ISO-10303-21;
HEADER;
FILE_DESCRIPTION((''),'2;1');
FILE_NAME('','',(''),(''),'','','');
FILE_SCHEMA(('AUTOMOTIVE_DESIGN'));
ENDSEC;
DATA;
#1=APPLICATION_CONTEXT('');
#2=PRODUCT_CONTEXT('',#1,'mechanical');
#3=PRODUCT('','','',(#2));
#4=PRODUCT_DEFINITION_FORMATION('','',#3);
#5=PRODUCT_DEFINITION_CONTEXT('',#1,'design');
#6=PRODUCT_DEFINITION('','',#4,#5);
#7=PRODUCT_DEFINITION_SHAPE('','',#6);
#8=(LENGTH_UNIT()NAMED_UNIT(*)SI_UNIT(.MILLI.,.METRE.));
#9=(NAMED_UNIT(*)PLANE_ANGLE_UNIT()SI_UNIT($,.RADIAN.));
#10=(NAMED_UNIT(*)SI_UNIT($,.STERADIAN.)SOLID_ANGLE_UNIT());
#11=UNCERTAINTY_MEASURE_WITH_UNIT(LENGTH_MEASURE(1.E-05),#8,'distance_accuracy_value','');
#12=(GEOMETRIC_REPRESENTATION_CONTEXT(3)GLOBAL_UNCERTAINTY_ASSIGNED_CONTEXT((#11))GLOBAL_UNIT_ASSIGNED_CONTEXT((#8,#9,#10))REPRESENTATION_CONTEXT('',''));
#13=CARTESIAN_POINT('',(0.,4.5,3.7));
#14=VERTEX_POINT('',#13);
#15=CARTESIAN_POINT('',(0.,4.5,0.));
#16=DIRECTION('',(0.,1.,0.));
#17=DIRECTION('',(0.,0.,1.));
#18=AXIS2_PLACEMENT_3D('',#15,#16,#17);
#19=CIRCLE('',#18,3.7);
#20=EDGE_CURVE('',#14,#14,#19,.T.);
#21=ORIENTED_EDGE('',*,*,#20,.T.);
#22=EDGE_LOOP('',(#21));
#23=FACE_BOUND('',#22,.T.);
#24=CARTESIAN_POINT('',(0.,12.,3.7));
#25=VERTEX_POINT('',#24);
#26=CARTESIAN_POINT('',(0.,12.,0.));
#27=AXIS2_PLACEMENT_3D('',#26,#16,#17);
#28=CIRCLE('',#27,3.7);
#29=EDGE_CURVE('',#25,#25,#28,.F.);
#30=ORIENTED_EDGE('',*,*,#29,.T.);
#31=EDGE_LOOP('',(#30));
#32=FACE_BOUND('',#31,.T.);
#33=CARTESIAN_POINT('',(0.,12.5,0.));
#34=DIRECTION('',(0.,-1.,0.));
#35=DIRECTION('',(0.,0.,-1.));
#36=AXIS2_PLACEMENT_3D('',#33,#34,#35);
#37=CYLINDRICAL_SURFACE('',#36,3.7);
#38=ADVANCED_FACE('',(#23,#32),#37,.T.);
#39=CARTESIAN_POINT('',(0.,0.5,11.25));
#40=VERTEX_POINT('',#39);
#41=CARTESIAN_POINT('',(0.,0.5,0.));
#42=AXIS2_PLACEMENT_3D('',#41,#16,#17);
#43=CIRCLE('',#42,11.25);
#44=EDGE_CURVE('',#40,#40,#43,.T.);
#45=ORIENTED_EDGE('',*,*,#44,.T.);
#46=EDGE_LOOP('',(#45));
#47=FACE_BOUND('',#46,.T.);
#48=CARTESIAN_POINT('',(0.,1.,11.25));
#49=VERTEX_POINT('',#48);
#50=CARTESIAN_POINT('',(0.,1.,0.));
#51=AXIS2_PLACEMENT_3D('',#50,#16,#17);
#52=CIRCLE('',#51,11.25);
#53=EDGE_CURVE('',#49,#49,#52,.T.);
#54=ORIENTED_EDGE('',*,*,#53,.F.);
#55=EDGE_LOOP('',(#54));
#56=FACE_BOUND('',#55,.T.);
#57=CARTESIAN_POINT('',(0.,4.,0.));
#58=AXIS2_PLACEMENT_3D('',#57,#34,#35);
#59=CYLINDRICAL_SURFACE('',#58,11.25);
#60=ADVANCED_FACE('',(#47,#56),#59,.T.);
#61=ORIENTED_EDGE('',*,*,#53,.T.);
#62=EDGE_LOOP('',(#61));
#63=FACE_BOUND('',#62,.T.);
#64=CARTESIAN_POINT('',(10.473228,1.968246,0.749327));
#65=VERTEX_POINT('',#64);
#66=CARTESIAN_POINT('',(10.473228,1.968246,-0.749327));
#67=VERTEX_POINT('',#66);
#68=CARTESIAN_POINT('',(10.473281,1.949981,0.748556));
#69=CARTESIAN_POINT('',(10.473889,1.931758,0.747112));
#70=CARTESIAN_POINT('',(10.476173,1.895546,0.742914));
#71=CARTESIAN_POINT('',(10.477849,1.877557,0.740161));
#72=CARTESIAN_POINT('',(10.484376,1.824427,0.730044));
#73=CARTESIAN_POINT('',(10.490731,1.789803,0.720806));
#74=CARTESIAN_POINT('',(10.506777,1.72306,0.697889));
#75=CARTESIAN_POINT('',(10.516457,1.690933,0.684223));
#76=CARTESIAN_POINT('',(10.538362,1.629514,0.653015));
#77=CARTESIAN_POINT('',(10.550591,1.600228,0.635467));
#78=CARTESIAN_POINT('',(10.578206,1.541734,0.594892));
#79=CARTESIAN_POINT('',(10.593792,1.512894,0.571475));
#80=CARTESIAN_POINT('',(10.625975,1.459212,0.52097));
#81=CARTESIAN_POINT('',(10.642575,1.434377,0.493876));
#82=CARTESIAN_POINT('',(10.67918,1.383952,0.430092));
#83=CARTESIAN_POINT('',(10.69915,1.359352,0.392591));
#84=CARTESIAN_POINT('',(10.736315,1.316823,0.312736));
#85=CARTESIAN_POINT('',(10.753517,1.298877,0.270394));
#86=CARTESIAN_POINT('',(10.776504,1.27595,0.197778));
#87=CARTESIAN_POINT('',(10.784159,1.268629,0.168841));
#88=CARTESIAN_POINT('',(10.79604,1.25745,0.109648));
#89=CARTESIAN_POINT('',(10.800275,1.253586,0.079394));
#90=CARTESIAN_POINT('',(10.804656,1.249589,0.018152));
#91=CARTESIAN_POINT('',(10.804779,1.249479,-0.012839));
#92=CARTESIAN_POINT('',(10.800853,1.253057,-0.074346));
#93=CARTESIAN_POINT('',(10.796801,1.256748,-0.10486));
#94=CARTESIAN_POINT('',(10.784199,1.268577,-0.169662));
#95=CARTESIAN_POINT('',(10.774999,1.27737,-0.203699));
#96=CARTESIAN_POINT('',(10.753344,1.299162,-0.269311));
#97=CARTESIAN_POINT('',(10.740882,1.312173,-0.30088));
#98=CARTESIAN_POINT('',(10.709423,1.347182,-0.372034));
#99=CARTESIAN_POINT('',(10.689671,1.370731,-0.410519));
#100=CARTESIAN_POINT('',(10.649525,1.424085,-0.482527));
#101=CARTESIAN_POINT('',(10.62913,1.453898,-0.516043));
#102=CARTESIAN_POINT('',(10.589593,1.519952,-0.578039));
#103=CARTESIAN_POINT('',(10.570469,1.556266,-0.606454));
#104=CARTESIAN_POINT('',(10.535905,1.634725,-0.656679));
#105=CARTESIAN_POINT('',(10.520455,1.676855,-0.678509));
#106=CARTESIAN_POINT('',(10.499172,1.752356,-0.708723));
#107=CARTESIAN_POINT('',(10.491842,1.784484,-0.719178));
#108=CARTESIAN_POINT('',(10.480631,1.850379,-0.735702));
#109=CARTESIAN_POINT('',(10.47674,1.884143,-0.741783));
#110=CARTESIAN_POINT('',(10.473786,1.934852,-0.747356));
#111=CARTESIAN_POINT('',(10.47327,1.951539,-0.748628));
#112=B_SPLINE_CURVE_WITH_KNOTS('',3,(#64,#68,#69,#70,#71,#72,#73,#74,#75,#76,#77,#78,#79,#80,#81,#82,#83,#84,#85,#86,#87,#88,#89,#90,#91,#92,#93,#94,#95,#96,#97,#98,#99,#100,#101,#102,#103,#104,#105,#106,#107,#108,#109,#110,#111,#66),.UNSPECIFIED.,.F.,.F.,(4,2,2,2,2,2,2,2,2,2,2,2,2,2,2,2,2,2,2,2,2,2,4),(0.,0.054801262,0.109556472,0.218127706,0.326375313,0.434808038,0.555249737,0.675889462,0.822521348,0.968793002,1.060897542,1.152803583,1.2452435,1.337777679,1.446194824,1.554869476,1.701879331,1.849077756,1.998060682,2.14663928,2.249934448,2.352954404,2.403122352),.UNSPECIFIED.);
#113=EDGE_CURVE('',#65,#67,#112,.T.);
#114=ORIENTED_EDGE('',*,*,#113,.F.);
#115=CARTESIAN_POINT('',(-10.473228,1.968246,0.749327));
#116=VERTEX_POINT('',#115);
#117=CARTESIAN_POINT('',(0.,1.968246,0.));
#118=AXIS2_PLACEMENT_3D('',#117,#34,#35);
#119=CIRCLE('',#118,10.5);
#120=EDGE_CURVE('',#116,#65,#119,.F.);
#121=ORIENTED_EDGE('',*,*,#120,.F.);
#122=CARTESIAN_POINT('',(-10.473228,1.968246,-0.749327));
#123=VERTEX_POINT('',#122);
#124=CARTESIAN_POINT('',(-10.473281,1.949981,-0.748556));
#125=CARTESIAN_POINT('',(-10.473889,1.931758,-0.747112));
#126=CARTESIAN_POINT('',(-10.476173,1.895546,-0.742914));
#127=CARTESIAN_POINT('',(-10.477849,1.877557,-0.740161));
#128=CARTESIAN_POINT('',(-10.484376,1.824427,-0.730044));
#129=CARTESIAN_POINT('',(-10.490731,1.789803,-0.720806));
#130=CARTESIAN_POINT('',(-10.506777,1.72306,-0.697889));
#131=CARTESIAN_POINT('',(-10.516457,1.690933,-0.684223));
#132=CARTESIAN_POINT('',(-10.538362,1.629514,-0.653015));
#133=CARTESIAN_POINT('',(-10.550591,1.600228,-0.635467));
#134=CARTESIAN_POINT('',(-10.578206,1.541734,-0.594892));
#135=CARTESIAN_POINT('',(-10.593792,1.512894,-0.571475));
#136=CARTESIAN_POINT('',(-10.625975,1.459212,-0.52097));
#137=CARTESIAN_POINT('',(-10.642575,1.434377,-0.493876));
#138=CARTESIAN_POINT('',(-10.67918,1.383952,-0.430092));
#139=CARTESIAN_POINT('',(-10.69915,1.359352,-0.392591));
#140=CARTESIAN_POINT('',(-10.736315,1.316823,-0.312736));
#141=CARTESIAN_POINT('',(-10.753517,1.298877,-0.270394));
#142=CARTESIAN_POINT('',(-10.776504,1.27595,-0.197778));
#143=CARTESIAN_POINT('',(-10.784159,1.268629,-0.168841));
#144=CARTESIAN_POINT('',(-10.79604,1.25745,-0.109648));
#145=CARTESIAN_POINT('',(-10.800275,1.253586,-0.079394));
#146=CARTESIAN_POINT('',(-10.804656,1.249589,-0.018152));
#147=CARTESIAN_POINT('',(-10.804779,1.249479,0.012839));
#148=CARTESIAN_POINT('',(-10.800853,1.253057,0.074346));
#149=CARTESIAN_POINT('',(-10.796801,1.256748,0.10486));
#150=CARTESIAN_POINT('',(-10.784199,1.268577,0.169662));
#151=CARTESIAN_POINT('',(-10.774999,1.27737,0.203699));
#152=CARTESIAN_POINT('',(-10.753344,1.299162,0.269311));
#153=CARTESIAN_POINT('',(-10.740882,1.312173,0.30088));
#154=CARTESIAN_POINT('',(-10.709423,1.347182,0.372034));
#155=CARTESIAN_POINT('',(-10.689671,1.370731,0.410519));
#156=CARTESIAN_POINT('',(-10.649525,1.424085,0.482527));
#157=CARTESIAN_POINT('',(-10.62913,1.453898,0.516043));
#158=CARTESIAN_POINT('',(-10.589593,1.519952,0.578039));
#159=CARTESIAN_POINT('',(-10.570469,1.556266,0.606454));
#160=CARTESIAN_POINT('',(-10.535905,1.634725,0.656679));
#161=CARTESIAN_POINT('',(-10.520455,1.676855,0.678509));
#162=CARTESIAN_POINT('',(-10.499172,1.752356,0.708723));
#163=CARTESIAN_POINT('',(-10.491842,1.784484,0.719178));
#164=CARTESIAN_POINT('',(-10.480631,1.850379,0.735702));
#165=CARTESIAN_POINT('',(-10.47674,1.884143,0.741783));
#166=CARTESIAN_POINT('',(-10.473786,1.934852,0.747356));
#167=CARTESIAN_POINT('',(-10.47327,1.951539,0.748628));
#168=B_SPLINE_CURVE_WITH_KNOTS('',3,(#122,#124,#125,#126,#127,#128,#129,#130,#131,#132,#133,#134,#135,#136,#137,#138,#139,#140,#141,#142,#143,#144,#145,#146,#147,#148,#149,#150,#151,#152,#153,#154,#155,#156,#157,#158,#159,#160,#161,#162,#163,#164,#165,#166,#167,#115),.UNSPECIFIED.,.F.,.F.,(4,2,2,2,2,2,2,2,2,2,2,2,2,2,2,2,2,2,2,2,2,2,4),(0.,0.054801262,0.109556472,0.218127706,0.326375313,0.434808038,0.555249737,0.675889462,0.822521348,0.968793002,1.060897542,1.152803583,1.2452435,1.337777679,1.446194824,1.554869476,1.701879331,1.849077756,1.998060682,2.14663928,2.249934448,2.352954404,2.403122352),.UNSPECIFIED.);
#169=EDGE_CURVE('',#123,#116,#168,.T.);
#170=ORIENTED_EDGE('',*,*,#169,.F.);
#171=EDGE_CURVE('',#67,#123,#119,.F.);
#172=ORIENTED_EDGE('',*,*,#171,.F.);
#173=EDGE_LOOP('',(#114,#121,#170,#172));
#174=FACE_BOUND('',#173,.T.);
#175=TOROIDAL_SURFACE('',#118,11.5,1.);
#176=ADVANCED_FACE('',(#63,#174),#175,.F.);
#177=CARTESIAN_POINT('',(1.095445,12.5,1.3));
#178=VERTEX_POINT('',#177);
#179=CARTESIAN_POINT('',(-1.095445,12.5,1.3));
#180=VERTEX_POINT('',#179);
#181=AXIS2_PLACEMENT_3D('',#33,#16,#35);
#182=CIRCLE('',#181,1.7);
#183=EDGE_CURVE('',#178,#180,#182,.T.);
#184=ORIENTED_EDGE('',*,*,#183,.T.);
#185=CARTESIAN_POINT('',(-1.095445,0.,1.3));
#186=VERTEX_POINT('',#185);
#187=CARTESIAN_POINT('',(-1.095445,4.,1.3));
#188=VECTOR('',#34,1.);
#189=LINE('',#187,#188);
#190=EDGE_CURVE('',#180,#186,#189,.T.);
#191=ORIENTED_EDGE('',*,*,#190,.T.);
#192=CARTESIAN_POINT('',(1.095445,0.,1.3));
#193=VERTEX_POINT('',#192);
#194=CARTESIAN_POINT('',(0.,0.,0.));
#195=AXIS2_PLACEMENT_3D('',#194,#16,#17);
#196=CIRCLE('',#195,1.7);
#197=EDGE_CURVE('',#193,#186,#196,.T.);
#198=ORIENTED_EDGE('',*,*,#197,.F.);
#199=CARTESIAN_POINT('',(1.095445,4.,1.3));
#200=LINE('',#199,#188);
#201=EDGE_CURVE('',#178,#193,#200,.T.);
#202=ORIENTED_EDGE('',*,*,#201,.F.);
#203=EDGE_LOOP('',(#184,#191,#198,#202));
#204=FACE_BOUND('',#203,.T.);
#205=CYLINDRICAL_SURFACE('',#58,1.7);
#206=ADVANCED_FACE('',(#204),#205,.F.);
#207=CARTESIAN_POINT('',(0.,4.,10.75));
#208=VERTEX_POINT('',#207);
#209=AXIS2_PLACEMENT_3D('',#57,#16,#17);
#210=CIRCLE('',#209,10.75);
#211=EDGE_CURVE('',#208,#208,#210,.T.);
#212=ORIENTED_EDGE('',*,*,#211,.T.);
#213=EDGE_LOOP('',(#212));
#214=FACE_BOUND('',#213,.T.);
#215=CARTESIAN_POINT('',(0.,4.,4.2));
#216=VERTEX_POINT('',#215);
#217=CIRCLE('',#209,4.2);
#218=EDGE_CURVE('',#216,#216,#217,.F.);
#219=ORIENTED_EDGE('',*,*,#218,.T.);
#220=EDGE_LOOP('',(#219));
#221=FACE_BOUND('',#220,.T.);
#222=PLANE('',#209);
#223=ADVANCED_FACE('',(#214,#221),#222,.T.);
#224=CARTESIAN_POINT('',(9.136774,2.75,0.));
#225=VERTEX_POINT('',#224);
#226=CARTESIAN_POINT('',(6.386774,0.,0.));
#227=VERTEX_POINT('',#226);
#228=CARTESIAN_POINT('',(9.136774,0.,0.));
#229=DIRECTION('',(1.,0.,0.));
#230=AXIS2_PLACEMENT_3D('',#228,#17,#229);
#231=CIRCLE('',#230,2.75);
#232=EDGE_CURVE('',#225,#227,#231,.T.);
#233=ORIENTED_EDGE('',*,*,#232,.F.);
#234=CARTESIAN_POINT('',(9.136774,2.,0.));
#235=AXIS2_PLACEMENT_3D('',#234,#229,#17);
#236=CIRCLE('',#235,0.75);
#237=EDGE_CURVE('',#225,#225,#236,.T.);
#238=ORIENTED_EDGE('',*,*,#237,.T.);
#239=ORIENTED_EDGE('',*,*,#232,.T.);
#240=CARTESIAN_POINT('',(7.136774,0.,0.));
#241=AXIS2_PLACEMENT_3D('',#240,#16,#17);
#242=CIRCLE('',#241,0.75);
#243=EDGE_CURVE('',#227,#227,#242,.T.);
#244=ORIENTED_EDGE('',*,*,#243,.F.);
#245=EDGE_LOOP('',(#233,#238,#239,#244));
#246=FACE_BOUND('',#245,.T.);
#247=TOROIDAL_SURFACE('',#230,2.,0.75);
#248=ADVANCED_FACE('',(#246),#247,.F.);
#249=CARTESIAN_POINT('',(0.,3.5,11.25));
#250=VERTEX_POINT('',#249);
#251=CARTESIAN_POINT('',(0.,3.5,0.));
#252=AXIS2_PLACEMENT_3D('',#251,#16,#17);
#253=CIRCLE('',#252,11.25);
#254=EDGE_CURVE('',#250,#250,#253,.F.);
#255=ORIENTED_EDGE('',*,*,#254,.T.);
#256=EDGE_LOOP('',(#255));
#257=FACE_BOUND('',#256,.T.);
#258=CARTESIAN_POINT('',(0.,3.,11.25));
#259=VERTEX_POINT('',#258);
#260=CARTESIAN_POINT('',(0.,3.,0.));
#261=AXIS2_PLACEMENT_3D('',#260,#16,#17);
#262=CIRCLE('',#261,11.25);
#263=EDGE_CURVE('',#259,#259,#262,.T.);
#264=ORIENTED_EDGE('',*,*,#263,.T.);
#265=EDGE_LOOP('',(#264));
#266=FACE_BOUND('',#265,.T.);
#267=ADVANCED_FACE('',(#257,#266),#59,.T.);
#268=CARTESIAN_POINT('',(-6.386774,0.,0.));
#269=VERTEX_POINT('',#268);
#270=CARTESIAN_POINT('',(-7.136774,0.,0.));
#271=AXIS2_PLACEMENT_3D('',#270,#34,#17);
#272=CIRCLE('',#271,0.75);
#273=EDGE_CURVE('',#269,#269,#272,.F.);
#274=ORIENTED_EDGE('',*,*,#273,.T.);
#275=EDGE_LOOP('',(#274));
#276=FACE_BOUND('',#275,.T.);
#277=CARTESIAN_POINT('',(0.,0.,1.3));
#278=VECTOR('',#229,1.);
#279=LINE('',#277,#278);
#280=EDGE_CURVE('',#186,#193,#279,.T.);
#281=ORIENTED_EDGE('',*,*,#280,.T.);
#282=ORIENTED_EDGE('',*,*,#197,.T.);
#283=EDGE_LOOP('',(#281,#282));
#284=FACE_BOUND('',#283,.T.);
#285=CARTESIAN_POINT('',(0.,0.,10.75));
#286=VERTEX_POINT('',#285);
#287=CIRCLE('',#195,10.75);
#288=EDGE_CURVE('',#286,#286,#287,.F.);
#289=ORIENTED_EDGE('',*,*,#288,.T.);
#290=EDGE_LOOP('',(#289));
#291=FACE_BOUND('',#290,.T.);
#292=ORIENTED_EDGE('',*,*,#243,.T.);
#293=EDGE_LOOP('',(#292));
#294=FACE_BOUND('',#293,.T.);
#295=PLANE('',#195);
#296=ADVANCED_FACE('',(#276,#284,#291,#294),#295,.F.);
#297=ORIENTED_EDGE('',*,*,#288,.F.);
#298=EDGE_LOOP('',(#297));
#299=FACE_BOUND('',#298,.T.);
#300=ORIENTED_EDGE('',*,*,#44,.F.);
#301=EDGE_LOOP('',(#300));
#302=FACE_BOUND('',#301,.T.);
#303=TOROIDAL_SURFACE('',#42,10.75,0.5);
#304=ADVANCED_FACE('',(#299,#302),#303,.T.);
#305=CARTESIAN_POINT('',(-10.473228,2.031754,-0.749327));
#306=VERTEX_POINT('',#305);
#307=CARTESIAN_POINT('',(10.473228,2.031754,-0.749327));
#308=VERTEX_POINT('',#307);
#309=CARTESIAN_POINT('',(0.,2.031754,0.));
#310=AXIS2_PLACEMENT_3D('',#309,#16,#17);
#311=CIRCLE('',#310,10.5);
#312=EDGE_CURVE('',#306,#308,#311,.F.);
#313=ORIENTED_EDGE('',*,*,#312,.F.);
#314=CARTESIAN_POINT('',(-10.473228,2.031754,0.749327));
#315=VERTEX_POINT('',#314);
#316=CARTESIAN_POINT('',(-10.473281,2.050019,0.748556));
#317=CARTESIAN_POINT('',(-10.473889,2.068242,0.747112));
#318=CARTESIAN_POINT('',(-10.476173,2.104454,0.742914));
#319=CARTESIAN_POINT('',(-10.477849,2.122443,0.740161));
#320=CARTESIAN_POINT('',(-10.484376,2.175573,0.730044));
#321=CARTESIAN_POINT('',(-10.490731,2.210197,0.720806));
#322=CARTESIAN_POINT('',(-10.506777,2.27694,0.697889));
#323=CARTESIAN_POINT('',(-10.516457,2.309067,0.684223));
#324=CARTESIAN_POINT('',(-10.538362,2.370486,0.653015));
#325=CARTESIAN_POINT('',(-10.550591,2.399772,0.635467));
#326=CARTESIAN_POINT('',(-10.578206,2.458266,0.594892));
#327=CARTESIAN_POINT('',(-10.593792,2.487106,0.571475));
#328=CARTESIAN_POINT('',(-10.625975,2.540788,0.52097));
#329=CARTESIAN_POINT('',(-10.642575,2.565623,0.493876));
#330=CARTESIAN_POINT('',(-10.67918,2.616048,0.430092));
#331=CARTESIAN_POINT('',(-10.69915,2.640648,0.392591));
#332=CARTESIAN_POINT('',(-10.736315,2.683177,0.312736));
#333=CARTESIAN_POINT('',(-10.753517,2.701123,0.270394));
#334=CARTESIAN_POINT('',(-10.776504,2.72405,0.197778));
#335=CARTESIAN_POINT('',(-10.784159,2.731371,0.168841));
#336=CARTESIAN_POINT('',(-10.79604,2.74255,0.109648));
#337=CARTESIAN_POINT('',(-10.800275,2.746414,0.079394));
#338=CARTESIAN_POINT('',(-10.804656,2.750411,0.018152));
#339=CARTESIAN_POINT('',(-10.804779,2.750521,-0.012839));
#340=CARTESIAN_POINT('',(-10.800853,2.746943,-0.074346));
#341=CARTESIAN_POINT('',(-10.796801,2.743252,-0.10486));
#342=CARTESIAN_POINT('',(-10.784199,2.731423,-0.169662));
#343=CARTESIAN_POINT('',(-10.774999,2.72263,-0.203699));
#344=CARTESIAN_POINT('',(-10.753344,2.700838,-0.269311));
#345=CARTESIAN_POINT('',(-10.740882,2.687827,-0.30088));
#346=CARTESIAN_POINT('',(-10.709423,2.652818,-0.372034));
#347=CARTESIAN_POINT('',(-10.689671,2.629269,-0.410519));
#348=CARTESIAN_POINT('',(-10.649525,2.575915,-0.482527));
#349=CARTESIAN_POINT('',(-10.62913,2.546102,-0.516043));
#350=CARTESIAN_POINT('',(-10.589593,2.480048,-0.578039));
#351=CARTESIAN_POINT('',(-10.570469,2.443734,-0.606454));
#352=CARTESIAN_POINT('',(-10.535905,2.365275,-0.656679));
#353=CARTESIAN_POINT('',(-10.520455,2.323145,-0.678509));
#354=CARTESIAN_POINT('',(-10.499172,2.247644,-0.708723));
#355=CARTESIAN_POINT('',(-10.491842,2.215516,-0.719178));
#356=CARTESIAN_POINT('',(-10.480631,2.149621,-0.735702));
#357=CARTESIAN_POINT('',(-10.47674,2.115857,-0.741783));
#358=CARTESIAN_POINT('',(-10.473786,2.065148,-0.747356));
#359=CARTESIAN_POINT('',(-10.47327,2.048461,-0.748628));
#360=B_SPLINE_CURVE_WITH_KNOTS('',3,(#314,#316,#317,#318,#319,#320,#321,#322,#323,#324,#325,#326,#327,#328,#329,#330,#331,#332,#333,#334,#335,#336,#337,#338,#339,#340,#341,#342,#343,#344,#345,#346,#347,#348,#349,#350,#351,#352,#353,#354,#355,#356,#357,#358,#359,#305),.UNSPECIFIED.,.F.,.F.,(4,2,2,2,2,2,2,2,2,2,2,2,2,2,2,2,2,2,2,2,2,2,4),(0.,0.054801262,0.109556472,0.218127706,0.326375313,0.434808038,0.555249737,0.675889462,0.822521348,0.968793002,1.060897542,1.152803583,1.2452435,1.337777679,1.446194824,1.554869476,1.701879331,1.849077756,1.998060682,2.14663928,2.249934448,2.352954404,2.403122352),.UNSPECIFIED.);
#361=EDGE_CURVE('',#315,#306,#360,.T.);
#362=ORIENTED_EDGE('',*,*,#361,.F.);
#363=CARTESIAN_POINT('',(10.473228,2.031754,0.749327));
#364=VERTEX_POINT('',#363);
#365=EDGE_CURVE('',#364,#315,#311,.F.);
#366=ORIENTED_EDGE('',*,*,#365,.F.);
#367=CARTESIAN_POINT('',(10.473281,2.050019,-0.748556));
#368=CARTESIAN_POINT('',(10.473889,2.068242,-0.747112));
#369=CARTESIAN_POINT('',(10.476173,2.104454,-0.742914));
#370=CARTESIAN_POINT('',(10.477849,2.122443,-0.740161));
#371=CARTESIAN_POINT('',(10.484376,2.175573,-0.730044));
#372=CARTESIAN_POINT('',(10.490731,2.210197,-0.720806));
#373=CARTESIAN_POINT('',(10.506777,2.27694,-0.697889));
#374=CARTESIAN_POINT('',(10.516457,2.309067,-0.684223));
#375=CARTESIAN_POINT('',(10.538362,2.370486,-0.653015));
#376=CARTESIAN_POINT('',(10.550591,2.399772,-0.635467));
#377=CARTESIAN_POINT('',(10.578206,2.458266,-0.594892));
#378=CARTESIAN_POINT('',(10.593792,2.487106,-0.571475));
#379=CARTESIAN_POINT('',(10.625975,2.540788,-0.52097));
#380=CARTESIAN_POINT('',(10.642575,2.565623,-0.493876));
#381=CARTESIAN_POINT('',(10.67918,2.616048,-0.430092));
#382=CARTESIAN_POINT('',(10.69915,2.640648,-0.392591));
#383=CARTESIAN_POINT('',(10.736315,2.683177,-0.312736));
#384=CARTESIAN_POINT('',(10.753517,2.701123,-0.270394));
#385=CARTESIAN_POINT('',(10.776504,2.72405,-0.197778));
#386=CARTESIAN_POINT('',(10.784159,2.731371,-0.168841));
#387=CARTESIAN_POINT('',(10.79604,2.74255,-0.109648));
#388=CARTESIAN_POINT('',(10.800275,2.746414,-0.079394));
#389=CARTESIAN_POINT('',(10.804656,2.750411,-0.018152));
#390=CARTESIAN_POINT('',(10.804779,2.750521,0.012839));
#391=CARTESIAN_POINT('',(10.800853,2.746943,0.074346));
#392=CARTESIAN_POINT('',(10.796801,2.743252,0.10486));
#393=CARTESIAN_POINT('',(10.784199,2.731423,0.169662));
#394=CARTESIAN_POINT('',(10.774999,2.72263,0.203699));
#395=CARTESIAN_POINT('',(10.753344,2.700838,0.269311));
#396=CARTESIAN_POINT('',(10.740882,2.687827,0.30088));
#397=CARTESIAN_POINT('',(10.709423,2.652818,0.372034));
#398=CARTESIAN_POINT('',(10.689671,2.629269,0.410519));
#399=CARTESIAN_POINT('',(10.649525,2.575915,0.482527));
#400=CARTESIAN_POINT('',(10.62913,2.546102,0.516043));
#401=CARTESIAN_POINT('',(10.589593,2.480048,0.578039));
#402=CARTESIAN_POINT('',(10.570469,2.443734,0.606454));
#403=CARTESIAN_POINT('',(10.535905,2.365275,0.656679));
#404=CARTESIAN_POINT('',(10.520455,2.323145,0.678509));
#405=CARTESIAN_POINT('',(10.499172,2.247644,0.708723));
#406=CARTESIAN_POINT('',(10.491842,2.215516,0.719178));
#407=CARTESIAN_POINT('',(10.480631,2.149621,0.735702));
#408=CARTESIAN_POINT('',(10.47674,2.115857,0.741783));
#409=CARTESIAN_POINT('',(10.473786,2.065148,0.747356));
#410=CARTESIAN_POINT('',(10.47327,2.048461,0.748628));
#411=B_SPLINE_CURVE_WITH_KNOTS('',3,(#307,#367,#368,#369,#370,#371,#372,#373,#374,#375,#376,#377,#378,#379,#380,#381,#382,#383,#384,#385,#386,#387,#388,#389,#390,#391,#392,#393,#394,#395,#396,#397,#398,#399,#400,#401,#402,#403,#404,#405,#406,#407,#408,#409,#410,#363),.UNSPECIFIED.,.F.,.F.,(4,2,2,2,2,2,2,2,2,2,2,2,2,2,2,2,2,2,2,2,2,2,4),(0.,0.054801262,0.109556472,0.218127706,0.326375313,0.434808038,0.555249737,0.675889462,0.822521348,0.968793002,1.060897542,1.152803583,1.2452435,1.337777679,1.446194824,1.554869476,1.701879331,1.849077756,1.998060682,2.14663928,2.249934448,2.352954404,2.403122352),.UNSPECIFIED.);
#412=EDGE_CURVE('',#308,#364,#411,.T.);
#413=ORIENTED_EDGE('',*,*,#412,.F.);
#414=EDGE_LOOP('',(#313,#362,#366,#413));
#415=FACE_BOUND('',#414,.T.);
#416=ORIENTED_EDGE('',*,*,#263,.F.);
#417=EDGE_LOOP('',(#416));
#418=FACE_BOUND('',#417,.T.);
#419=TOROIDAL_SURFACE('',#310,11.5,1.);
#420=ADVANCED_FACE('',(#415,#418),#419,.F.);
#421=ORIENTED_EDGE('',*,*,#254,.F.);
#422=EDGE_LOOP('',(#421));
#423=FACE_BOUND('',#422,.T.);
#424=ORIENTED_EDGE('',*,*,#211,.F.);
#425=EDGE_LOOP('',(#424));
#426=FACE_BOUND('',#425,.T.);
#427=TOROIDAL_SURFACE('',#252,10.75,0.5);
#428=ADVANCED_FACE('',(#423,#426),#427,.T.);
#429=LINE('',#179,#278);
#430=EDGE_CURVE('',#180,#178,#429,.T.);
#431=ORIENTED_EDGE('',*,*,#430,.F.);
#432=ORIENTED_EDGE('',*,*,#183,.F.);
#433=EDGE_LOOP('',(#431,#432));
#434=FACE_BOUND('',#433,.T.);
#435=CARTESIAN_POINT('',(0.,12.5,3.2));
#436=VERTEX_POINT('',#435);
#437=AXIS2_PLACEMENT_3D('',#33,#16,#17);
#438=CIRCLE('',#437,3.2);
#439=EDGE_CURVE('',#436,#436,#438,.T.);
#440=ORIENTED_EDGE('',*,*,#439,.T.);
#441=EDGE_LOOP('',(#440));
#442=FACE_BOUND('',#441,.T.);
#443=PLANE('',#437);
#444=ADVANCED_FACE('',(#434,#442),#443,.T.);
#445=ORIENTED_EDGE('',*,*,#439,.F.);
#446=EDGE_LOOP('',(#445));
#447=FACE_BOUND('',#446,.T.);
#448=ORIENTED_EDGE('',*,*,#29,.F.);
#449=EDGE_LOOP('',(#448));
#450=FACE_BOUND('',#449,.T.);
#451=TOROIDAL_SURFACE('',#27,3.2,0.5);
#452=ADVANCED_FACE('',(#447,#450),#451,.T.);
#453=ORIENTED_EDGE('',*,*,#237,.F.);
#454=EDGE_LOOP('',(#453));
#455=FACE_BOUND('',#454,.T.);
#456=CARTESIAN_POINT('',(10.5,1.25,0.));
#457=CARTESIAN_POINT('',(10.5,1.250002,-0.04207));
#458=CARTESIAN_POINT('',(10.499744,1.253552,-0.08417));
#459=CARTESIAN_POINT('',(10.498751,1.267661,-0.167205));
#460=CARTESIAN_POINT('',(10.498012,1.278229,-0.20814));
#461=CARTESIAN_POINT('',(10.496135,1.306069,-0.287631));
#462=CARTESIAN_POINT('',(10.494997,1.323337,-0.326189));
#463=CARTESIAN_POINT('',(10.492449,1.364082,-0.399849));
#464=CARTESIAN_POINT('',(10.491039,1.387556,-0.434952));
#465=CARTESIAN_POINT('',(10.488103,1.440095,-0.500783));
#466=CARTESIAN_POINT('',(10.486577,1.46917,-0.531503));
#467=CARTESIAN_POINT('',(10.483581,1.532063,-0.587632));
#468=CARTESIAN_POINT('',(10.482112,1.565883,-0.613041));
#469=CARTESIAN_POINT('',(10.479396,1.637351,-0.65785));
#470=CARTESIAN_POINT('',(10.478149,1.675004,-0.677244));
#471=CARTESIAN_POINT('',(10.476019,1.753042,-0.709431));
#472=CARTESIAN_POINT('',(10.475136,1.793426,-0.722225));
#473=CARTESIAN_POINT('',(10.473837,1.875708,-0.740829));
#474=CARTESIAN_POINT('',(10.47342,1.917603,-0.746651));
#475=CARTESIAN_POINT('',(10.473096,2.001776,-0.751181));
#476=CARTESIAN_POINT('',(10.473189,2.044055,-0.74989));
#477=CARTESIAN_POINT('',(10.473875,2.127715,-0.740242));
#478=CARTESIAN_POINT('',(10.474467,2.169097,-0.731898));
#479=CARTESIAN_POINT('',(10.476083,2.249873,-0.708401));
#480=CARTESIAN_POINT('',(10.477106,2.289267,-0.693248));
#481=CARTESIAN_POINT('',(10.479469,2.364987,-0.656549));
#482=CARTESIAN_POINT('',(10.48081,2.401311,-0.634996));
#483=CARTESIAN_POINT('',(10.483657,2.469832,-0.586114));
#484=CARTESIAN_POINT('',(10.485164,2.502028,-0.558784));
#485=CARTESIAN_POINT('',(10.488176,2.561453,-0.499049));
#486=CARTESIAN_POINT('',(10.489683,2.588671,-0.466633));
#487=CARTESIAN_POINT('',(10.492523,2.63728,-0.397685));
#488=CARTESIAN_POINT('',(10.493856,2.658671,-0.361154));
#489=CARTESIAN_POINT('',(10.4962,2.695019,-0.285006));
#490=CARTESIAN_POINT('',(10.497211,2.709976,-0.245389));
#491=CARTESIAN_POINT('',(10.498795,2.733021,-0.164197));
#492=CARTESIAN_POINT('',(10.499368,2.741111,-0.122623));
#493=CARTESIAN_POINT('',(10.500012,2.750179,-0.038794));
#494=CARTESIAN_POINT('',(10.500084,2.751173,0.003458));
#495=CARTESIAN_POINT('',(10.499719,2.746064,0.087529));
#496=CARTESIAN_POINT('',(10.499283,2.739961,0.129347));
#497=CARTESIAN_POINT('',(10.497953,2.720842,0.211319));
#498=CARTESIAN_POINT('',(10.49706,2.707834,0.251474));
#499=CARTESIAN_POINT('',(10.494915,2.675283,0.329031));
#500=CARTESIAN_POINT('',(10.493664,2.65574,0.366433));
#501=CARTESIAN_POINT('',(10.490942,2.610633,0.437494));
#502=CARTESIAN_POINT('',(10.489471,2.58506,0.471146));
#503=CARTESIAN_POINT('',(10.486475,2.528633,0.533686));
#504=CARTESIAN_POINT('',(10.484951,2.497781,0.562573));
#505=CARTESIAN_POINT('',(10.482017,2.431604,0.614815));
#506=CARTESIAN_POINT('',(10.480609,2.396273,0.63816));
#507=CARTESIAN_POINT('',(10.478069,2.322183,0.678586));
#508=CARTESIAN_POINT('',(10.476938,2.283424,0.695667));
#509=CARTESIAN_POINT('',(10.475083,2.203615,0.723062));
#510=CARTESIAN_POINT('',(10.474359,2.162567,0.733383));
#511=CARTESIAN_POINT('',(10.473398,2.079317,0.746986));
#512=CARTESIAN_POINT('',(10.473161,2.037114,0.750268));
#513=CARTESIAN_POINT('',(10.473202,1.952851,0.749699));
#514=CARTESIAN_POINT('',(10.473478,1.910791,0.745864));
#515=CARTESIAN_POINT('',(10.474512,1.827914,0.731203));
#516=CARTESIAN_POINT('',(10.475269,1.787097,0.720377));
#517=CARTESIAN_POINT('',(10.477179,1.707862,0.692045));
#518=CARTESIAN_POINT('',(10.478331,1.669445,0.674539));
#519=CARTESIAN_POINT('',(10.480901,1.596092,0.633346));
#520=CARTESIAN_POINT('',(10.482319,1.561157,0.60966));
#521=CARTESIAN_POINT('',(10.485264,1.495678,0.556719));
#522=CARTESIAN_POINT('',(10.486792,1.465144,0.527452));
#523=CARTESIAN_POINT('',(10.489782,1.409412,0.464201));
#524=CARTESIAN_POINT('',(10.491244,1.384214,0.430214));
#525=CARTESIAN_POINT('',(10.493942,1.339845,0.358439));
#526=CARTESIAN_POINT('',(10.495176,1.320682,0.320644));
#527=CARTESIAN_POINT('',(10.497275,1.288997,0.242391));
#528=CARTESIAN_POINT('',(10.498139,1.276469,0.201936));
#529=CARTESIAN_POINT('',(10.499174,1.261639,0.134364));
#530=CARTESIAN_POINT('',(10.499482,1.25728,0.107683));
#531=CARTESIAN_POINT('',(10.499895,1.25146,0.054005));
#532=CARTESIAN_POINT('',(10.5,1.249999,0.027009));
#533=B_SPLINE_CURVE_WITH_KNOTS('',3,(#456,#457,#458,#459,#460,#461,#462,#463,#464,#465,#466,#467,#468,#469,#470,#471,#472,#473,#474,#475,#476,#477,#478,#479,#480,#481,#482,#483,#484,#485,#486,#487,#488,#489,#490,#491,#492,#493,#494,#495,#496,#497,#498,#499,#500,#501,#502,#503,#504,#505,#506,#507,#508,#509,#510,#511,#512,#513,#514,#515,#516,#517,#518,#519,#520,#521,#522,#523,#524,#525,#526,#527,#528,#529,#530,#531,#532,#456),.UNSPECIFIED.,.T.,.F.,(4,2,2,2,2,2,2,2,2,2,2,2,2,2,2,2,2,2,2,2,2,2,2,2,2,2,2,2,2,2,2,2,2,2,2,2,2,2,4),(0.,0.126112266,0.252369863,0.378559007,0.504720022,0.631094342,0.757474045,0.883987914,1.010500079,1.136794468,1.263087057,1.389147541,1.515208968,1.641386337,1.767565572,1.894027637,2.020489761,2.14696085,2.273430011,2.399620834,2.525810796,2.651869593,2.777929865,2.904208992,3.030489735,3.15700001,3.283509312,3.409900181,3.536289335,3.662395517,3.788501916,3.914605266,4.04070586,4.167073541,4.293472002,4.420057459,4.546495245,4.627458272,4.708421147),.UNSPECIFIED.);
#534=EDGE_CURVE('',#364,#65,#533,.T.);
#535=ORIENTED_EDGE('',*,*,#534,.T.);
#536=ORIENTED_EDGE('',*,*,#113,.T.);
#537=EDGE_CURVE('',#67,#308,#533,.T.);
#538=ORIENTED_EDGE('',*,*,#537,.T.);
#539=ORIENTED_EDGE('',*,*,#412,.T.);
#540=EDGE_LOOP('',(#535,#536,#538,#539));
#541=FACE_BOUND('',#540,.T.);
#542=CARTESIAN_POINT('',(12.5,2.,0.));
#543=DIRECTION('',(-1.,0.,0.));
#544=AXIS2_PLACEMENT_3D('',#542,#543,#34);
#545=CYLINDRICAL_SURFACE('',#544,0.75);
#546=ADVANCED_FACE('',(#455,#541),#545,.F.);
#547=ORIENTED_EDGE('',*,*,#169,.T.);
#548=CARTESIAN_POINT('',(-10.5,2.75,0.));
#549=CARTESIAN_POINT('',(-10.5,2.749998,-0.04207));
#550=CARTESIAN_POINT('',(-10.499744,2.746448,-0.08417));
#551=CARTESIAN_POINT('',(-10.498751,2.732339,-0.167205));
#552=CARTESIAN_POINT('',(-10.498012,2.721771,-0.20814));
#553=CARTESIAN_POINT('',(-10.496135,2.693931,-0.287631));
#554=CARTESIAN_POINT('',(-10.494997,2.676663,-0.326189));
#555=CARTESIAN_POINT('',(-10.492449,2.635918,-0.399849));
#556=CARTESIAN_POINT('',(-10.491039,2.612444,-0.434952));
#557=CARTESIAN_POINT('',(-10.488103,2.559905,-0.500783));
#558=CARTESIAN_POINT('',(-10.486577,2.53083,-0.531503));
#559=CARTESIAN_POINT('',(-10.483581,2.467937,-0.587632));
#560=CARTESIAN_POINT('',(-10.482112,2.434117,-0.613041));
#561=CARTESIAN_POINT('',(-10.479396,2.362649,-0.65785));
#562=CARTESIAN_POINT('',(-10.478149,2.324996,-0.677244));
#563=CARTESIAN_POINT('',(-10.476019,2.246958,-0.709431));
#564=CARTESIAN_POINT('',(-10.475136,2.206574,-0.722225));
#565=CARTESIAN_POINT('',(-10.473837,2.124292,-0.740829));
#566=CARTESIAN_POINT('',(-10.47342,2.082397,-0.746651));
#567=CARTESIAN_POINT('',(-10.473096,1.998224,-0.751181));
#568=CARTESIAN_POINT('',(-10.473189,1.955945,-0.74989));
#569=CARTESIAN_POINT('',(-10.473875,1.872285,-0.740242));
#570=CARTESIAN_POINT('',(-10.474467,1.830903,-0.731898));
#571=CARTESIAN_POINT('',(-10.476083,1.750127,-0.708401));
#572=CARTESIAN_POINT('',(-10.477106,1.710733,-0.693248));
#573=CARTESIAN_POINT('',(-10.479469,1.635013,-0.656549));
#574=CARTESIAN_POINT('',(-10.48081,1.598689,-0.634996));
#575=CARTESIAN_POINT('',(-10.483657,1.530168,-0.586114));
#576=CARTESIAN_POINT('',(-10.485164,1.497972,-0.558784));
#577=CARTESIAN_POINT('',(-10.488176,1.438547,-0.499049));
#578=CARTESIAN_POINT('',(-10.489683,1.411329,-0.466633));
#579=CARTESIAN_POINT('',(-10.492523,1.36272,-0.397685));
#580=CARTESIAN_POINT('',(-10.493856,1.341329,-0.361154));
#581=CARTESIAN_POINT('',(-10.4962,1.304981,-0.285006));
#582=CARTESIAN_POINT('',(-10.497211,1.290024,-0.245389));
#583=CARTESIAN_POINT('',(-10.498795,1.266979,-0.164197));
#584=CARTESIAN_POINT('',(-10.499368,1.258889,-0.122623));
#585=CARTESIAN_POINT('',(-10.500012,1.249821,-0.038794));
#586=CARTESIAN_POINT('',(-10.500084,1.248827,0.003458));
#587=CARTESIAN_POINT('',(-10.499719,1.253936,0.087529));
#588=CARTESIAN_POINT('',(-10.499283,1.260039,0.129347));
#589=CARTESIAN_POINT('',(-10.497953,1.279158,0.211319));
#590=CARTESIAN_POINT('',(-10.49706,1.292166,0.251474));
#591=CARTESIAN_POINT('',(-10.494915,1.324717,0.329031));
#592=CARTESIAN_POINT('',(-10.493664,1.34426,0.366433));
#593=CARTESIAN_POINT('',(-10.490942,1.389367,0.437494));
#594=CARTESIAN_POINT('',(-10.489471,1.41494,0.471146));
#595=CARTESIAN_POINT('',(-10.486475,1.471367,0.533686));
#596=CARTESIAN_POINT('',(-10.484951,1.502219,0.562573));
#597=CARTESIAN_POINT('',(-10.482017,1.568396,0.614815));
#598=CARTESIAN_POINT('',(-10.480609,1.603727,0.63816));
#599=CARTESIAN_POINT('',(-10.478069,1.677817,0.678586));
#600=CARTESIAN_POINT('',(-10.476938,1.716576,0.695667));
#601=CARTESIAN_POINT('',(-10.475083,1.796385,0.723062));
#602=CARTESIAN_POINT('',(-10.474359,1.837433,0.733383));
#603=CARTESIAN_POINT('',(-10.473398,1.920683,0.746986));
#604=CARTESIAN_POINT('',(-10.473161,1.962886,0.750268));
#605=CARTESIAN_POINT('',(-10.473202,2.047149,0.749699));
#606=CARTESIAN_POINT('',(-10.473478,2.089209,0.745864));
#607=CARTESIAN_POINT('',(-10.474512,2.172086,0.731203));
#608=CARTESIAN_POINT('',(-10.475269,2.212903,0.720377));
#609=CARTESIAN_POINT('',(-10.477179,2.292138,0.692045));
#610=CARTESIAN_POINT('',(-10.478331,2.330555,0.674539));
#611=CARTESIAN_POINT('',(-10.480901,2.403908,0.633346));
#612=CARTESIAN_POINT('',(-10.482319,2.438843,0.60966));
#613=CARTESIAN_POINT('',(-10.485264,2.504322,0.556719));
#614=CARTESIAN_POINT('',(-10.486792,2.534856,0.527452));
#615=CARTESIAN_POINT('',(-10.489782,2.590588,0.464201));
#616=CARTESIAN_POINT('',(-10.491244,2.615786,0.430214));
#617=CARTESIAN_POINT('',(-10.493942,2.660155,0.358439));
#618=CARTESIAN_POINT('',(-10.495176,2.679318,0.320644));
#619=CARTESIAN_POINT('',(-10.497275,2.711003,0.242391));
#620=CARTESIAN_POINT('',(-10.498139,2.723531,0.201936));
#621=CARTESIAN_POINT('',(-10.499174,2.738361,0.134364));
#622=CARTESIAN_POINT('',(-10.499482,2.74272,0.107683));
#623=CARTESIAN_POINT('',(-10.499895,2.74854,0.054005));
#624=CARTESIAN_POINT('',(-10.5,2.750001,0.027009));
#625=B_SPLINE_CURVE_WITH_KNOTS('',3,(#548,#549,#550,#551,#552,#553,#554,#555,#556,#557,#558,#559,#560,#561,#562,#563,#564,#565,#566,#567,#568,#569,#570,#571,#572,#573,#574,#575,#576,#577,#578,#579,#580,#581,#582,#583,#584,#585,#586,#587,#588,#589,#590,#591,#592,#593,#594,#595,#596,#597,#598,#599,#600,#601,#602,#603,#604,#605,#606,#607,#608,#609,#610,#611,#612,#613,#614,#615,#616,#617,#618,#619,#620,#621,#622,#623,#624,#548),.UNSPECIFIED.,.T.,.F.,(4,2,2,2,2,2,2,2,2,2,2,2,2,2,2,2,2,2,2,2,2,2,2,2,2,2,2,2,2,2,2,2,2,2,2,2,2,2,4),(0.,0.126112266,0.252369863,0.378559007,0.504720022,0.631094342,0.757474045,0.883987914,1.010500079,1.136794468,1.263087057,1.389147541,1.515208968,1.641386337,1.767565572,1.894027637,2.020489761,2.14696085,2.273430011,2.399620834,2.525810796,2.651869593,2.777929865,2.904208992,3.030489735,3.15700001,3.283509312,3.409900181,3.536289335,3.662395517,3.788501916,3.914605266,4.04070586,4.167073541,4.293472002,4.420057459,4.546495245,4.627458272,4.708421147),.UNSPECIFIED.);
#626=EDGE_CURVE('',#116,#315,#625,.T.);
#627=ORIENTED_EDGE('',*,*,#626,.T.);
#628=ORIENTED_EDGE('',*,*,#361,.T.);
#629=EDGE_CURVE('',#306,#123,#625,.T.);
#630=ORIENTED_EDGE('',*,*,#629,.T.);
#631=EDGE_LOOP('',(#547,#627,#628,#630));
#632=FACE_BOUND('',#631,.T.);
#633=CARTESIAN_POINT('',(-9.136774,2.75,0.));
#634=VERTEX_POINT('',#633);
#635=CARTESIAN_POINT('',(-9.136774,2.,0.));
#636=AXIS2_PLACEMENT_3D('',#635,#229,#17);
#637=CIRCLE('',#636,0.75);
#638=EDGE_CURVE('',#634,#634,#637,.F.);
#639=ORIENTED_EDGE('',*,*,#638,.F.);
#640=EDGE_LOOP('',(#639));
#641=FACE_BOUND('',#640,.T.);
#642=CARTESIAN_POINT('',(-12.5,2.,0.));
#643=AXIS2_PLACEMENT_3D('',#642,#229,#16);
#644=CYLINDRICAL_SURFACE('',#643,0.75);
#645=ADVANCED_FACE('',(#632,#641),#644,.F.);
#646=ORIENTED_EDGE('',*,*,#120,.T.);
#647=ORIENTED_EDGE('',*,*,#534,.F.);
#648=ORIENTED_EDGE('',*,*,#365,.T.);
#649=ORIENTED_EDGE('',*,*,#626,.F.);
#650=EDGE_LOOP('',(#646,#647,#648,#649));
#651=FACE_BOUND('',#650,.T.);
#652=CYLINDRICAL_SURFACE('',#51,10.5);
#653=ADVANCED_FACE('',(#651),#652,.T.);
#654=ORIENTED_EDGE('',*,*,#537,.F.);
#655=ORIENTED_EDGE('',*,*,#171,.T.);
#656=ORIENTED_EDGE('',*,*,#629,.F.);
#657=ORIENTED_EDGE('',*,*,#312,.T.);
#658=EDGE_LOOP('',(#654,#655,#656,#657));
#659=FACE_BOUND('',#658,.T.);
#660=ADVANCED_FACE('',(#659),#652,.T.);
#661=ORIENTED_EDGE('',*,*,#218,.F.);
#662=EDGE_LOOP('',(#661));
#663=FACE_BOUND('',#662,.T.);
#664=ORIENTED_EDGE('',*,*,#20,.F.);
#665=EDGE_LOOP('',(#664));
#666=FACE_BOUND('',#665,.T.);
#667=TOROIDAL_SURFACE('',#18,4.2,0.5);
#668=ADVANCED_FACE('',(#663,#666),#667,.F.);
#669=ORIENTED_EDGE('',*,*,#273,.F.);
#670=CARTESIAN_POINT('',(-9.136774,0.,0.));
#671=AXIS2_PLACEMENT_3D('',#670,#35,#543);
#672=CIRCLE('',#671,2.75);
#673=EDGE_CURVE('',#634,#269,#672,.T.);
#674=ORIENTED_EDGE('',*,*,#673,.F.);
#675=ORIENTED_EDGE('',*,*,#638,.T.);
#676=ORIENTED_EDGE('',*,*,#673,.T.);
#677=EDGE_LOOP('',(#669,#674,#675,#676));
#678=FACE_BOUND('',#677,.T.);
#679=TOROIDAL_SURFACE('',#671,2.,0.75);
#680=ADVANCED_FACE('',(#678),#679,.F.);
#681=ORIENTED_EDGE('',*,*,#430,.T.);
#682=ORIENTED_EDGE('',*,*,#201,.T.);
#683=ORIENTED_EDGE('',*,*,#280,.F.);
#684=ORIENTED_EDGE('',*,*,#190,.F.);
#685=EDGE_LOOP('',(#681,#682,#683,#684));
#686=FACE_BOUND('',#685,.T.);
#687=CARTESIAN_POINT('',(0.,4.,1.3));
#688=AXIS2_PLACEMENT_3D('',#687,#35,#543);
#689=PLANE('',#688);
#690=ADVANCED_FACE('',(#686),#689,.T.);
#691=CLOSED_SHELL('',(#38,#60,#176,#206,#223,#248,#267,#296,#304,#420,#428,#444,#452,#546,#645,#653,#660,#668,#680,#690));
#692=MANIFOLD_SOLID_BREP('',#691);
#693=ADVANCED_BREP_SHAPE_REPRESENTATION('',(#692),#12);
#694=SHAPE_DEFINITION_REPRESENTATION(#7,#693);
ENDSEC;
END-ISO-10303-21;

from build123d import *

# Parameters (mm, degrees)
SKETCH1_R            = 11.25
SKETCH1_R_2          = 1.7
BOSS_EXTRUDE1_DEPTH  = 4
SKETCH2_R            = 3.7
BOSS_EXTRUDE2_DEPTH  = 8.5
CUT_SWEEP1_PROFILE_R = 0.75
SKETCH21_R           = 12.5
SKETCH21_R_2         = 10.5
CUT_EXTRUDE1_DEPTH   = 1
FILLET1_R            = 1
FILLET2_R            = 0.5


with BuildPart() as part:
    # Sketch1 → Boss-Extrude1 (new body)
    # profile 1 of 5: a face of its own
    with BuildSketch(Plane(origin=(0, 0, 0), x_dir=(1, 0, 0), z_dir=(0, 1, 0))):
        with Locations(Location((0, 0, 0), (0, 0, 270))):
            Circle(SKETCH1_R)
        Circle(SKETCH1_R_2, mode=Mode.SUBTRACT)
    # profile 2 of 5: a face of its own
    with BuildSketch(Plane(origin=(0, 0, 0), x_dir=(1, 0, 0), z_dir=(0, 1, 0))):
        with BuildLine():
            Line((0, -1.3), (-1.095445115, -1.3))
            ThreePointArc((-1.095445115, -1.3), (-0.583095189, -1.596871942), (0, -1.7))
            Line((0, -1.7), (0, -1.3))
        make_face()
    # profile 3 of 5: a face of its own
    with BuildSketch(Plane(origin=(0, 0, 0), x_dir=(1, 0, 0), z_dir=(0, 1, 0))):
        with BuildLine():
            Line((1.095445115, -1.3), (0, -1.3))
            Line((0, -1.3), (0, -1.7))
            ThreePointArc((0, -1.7), (0.583095189, -1.596871942), (1.095445115, -1.3))
        make_face()
    # profile 4 of 5: a face of its own
    with BuildSketch(Plane(origin=(0, 0, 0), x_dir=(1, 0, 0), z_dir=(0, 1, 0))):
        with BuildLine():
            Line((0, -1.3), (-1.095445115, -1.3))
            ThreePointArc((-1.095445115, -1.3), (-0.583095189, -1.596871942), (0, -1.7))
            Line((0, -1.7), (0, -1.3))
        make_face()
    # profile 5 of 5: a face of its own
    with BuildSketch(Plane(origin=(0, 0, 0), x_dir=(1, 0, 0), z_dir=(0, 1, 0))):
        with BuildLine():
            Line((1.095445115, -1.3), (0, -1.3))
            Line((0, -1.3), (0, -1.7))
            ThreePointArc((0, -1.7), (0.583095189, -1.596871942), (1.095445115, -1.3))
        make_face()
    extrude(amount=BOSS_EXTRUDE1_DEPTH)

    # Sketch2 → Boss-Extrude2 (add)
    with BuildSketch(Plane(origin=(0, 4, 0), x_dir=(1, 0, 0), z_dir=(0, 1, 0))):
        with Locations(Location((0, 0, 0), (0, 0, 270))):
            Circle(SKETCH2_R)
        with BuildLine():
            Line((-1.095445115, -1.3), (1.095445115, -1.3))
            ThreePointArc((1.095445115, -1.3), (0, 1.7), (-1.095445115, -1.3))
        make_face(mode=Mode.SUBTRACT)
    extrude(amount=BOSS_EXTRUDE2_DEPTH)

    # Cut-Sweep1: sweep along a curve in space
    with BuildLine() as cut_sweep1_path:
        Line((12.5, 2, 0), (9.136774381, 2, 0))
        ThreePointArc((7.136774381, 0, 0), (7.722560819, 1.414213562, 0), (9.136774381, 2, 0))
        Line((7.136774381, 0, 0), (7.136774381, -2.281561943, 0))
    # Cut-Sweep1 profile (on start of the path) → Cut-Sweep1 (sweep, cut)
    with BuildSketch(Plane(origin=(12.5, 2, 0), x_dir=(0, -1, 0), z_dir=(-1, 0, 0))):
        Circle(CUT_SWEEP1_PROFILE_R)
    cut_sweep1 = sweep(path=cut_sweep1_path.line, mode=Mode.SUBTRACT)

    # Mirror1: Cut-Sweep1 across plane
    add(cut_sweep1.mirror(Plane(origin=(0, 0, 0), x_dir=(0, 0, 1), z_dir=(1, 0, 0))), mode=Mode.SUBTRACT)

    # Sketch21 → Cut-Extrude1 (cut, symmetric)
    with BuildSketch(Plane(origin=(0, 2, 0), x_dir=(1, 0, 0), z_dir=(0, 1, 0))):
        Circle(SKETCH21_R)
        with Locations(Location((0, 0, 0), (0, 0, 270))):
            Circle(SKETCH21_R_2, mode=Mode.SUBTRACT)
    extrude(amount=CUT_EXTRUDE1_DEPTH, both=True, mode=Mode.SUBTRACT)

    # Fillet1
    # the kernel refuses this fillet: 1 mm, written as the material it adds along each edge
    with BuildSketch(Plane(origin=(0, 1, 0), x_dir=(0, 0, 1), z_dir=(-1, 0, 0))) as fillet1_piece_1_section:
        with BuildLine():
            CenterArc((11.5, 0.968245837), FILLET1_R, 180, 75.522487814)
            Line((10.5, 0.968245837), (10.48, 0.968245837))
            Line((10.48, 0.968245837), (10.48, 0))
            Line((10.48, 0), (10.5, -0.02))
            ThreePointArc((10.5, -0.02), (10.875, -0.02), (11.245, -0.019364917))
            Line((11.245, -0.019364917), (11.25, 0))
        make_face()
    fillet1_piece_1 = revolve(axis=Axis((0, 1, 0), (0, 1, 0)), mode=Mode.PRIVATE)
    fillet1_piece_1 = fillet1_piece_1 - Plane(origin=(0, 2, 0), x_dir=(0, -1, 0), z_dir=(-1, 0, 0)) * Cylinder(0.75, 45, mode=Mode.PRIVATE)
    add(fillet1_piece_1)
    with BuildSketch(Plane(origin=(0, 3, 0), x_dir=(0, 0, 1), z_dir=(-1, 0, 0))) as fillet1_piece_2_section:
        with BuildLine():
            CenterArc((11.5, -0.968245837), FILLET1_R, 104.477512186, 75.522487814)
            Line((11.25, 0), (11.245, 0.019364917))
            ThreePointArc((11.245, 0.019364917), (10.875, 0.02), (10.5, 0.02))
            Line((10.5, 0.02), (10.48, 0))
            Line((10.48, 0), (10.48, -0.968245837))
            Line((10.48, -0.968245837), (10.5, -0.968245837))
        make_face()
    fillet1_piece_2 = revolve(axis=Axis((0, 3, 0), (0, 1, 0)), mode=Mode.PRIVATE)
    fillet1_piece_2 = fillet1_piece_2 - Plane(origin=(0, 2, 0), x_dir=(0, -1, 0), z_dir=(-1, 0, 0)) * Cylinder(0.75, 45, mode=Mode.PRIVATE)
    add(fillet1_piece_2)

    # Fillet2
    fillet2_edges = [part.edges().sort_by_distance(p)[0] for p in [
        (0, 12.5, -3.7),
        (0, 4, -3.7),
        (0, 4, -11.25),
        (0, 0, -11.25),
    ]]
    fillet(fillet2_edges, radius=FILLET2_R)


solid = part.part
